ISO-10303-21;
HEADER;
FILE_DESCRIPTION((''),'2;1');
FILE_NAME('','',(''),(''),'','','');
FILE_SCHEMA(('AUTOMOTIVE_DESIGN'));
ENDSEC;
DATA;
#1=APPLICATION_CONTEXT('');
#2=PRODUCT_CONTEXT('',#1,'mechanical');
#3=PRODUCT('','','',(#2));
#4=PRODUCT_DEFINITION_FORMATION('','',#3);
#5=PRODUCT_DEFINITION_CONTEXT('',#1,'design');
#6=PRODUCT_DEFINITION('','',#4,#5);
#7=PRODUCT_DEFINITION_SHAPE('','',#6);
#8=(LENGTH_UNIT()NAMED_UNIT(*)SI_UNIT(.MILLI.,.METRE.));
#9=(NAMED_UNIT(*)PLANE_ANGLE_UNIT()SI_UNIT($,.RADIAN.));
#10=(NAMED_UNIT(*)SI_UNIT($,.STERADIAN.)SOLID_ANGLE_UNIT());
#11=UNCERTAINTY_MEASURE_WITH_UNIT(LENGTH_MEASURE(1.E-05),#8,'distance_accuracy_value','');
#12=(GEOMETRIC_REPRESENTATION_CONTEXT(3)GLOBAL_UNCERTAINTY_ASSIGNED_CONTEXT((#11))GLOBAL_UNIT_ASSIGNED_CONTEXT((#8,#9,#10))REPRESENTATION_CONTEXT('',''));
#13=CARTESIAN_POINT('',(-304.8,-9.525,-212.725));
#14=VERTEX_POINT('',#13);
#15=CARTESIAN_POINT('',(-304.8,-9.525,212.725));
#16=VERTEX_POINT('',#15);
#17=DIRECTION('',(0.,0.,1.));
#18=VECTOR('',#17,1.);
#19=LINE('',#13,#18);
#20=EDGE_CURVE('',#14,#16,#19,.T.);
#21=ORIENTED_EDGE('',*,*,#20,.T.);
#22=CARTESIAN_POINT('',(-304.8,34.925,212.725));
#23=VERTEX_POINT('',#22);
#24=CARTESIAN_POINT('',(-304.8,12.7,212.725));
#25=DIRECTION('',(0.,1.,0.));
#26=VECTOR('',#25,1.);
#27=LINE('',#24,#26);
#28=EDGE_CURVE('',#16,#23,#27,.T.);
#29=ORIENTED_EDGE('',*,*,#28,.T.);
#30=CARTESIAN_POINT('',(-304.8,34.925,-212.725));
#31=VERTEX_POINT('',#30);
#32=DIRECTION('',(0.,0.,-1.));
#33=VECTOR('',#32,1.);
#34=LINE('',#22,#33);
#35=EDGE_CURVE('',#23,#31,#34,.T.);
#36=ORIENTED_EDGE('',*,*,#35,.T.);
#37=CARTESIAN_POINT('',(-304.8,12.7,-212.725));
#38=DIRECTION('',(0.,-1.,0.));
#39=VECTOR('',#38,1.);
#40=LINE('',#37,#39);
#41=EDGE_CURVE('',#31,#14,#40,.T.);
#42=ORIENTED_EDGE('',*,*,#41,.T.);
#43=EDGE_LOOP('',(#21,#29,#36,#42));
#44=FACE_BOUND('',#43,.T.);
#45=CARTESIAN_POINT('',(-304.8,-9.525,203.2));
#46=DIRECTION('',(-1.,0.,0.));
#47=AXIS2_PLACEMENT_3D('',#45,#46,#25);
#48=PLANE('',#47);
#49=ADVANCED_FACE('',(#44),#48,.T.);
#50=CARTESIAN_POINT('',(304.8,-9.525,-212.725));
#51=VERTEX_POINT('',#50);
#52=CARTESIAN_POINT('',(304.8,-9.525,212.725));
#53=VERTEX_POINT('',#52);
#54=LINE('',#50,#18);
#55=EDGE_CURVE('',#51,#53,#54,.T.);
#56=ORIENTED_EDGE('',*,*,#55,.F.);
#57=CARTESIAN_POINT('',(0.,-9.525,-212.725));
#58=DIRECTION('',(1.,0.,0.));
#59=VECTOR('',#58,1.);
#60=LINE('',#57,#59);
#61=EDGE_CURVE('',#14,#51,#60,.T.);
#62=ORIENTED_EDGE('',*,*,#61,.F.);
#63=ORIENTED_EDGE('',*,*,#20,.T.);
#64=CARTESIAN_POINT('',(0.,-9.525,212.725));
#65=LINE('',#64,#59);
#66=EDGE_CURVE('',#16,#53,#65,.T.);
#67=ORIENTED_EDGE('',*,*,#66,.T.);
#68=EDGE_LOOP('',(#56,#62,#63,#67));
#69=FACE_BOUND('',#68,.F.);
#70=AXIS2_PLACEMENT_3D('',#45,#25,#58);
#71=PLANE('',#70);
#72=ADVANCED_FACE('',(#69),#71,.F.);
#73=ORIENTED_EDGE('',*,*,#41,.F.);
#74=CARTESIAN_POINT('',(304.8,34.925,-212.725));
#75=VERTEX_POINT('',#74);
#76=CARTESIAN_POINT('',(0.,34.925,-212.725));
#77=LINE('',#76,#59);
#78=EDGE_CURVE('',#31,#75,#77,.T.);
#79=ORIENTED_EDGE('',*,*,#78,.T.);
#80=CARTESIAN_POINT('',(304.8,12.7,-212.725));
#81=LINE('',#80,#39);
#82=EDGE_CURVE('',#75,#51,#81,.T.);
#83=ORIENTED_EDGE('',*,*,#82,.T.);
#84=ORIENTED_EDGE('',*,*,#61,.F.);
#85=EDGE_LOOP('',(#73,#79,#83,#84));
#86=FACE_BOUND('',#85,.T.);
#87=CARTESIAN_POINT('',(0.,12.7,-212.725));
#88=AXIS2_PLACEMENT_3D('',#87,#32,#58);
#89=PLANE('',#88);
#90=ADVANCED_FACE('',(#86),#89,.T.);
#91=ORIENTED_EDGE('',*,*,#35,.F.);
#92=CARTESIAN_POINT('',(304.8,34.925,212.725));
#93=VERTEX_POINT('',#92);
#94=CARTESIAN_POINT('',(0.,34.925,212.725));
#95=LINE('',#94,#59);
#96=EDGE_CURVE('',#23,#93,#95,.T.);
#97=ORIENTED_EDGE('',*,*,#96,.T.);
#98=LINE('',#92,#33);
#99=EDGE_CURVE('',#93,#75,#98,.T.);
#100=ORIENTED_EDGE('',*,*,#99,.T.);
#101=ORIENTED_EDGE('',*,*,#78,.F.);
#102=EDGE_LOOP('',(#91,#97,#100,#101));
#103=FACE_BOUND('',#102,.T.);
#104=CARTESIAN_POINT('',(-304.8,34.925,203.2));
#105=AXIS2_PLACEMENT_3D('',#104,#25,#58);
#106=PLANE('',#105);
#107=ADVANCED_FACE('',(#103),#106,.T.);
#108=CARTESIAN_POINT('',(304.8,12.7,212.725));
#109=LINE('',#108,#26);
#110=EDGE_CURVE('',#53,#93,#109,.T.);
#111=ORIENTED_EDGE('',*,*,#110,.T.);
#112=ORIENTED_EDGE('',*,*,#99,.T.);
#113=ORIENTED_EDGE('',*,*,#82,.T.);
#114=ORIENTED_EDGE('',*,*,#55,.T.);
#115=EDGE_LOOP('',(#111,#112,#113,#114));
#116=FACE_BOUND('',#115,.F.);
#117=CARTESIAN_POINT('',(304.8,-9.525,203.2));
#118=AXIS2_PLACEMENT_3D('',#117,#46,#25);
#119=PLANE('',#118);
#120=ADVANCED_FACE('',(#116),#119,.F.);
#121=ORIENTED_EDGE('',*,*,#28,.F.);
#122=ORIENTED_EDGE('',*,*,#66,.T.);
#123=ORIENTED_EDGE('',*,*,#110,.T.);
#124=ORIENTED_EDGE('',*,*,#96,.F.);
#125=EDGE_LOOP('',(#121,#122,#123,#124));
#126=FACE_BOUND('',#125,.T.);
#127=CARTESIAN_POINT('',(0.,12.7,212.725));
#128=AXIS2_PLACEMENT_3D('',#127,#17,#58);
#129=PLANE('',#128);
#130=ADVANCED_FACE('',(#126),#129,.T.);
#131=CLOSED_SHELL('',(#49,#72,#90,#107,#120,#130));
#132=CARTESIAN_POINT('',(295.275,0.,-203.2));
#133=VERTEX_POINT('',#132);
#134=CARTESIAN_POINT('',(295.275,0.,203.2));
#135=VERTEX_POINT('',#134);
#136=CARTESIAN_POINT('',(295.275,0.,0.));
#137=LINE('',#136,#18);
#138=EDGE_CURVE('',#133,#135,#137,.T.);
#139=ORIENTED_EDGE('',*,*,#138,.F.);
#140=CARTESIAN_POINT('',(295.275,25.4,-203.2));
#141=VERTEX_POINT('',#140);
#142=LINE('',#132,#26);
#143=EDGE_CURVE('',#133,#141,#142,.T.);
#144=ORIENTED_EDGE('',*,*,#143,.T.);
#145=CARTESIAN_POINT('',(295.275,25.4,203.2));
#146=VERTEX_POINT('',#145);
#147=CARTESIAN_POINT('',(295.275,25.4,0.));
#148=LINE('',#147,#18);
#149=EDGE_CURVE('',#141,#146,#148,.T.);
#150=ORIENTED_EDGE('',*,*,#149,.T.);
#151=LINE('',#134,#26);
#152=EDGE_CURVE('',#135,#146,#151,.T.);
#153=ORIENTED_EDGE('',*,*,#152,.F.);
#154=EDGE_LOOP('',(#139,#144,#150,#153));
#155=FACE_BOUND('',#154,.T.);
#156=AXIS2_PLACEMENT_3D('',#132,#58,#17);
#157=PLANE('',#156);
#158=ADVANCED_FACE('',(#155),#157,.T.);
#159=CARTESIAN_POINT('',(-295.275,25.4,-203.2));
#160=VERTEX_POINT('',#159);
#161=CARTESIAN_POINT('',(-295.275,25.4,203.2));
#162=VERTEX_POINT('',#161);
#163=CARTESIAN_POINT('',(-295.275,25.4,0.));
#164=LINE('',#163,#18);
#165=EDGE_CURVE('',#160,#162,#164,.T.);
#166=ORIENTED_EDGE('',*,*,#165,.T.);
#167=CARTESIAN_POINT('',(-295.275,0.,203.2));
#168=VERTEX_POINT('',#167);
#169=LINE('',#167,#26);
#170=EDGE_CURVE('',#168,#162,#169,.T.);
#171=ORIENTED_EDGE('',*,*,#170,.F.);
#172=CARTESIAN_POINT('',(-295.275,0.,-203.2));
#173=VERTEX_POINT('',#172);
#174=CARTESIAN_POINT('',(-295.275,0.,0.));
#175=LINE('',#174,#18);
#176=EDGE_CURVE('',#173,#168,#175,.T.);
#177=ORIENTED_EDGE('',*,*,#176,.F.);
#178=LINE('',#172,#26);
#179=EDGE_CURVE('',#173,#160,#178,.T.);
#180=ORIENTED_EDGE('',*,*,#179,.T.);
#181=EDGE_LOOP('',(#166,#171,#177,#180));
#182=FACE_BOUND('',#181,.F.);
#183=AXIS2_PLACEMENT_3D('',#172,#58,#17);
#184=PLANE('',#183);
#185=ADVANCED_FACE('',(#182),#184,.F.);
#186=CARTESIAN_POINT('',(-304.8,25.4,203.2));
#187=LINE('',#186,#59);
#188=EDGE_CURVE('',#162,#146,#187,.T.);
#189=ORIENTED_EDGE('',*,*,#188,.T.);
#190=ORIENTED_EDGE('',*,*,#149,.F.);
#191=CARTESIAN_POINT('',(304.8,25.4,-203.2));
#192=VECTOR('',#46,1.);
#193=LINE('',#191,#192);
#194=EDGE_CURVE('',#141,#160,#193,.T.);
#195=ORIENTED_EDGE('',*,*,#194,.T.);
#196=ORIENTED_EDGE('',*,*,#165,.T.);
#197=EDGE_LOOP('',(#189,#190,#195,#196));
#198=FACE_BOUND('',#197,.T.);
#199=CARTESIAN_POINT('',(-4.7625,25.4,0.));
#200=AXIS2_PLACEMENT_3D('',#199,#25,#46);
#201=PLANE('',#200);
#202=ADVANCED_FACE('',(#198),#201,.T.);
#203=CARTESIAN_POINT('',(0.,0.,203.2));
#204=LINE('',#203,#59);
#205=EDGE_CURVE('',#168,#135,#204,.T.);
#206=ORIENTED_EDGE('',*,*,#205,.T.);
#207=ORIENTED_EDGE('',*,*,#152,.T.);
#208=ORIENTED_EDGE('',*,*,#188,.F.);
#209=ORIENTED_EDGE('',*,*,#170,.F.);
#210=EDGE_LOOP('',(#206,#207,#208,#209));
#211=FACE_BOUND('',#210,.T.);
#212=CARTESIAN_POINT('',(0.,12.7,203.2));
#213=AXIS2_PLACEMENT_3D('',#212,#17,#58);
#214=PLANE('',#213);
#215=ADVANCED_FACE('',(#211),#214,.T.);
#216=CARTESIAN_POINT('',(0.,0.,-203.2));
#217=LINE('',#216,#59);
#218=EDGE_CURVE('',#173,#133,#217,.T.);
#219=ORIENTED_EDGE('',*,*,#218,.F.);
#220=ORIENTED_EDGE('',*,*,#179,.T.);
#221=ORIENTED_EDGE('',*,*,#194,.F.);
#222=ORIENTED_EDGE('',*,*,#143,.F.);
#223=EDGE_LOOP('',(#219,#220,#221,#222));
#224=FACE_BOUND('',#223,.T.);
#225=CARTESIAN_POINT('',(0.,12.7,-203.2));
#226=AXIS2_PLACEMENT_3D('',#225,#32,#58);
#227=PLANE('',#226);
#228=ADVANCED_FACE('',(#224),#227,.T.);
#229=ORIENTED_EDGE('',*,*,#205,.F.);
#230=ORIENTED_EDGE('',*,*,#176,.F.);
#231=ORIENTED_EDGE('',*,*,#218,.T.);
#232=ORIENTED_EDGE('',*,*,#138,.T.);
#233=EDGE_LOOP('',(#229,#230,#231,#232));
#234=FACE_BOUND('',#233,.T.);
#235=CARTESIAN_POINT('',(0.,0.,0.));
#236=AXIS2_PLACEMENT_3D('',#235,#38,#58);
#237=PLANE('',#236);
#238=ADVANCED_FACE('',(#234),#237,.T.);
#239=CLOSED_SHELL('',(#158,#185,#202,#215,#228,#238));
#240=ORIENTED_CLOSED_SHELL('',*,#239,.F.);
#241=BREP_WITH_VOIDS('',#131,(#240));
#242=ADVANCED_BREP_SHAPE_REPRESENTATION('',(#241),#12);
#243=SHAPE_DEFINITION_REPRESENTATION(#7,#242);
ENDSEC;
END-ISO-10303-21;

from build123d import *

# Parameters (mm, degrees)
F0_W     = 609.6
F0_H     = 406.4
F1_DEPTH = 9.525
F2_W     = 9.525
F2_H     = 406.4
F3_DEPTH = 25.4
F4_W     = 600.075
F4_H     = 406.4
F4_W_2   = 9.525
F5_DEPTH = 9.525
F6_W     = 609.6
F6_H     = 44.45
F7_DEPTH = 9.525
F8_W     = 609.6
F8_H     = 44.45
F9_DEPTH = 9.525


# Not quite as in the source:
# - a length typed as a fraction of an inch, garbled in the dataset ("3 / 203.2 mm" for 3/8 in), is restored


with BuildPart() as f1:
    # F0 (on Front) → F1 (new body)
    with BuildSketch(Plane.XZ):
        Rectangle(F0_W, F0_H)
    extrude(amount=F1_DEPTH)

    # F2 (on face) → F3 (join)
    with BuildSketch(Plane(origin=(0, 0, 0), x_dir=(-1, 0, 0), z_dir=(0, 1, 0))):
        with Locations((-300.0375, 0)):
            Rectangle(F2_W, F2_H)
        with Locations((300.0375, 0)):
            Rectangle(F2_W, F2_H)
    extrude(amount=F3_DEPTH)

    # F4 (on face) → F5 (join)
    with BuildSketch(Plane(origin=(0, 25.4, 0), x_dir=(-1, 0, 0), z_dir=(0, 1, 0))):
        with Locations((4.7625, 0)):
            Rectangle(F4_W, F4_H)
        with Locations((-300.0375, 0)):
            Rectangle(F4_W_2, F4_H)
    extrude(amount=F5_DEPTH)

    # F6 (on face) → F7 (join)
    with BuildSketch(Plane(origin=(0, 0, -203.2), x_dir=(1, 0, 0), z_dir=(0, 0, -1))):
        with Locations((0, -12.7)):
            Rectangle(F6_W, F6_H)
    extrude(amount=F7_DEPTH)

    # F8 (on face) → F9 (join)
    with BuildSketch(Plane.XY.offset(203.2)):
        with Locations((0, 12.7)):
            Rectangle(F8_W, F8_H)
    extrude(amount=F9_DEPTH)


solid = f1.part
